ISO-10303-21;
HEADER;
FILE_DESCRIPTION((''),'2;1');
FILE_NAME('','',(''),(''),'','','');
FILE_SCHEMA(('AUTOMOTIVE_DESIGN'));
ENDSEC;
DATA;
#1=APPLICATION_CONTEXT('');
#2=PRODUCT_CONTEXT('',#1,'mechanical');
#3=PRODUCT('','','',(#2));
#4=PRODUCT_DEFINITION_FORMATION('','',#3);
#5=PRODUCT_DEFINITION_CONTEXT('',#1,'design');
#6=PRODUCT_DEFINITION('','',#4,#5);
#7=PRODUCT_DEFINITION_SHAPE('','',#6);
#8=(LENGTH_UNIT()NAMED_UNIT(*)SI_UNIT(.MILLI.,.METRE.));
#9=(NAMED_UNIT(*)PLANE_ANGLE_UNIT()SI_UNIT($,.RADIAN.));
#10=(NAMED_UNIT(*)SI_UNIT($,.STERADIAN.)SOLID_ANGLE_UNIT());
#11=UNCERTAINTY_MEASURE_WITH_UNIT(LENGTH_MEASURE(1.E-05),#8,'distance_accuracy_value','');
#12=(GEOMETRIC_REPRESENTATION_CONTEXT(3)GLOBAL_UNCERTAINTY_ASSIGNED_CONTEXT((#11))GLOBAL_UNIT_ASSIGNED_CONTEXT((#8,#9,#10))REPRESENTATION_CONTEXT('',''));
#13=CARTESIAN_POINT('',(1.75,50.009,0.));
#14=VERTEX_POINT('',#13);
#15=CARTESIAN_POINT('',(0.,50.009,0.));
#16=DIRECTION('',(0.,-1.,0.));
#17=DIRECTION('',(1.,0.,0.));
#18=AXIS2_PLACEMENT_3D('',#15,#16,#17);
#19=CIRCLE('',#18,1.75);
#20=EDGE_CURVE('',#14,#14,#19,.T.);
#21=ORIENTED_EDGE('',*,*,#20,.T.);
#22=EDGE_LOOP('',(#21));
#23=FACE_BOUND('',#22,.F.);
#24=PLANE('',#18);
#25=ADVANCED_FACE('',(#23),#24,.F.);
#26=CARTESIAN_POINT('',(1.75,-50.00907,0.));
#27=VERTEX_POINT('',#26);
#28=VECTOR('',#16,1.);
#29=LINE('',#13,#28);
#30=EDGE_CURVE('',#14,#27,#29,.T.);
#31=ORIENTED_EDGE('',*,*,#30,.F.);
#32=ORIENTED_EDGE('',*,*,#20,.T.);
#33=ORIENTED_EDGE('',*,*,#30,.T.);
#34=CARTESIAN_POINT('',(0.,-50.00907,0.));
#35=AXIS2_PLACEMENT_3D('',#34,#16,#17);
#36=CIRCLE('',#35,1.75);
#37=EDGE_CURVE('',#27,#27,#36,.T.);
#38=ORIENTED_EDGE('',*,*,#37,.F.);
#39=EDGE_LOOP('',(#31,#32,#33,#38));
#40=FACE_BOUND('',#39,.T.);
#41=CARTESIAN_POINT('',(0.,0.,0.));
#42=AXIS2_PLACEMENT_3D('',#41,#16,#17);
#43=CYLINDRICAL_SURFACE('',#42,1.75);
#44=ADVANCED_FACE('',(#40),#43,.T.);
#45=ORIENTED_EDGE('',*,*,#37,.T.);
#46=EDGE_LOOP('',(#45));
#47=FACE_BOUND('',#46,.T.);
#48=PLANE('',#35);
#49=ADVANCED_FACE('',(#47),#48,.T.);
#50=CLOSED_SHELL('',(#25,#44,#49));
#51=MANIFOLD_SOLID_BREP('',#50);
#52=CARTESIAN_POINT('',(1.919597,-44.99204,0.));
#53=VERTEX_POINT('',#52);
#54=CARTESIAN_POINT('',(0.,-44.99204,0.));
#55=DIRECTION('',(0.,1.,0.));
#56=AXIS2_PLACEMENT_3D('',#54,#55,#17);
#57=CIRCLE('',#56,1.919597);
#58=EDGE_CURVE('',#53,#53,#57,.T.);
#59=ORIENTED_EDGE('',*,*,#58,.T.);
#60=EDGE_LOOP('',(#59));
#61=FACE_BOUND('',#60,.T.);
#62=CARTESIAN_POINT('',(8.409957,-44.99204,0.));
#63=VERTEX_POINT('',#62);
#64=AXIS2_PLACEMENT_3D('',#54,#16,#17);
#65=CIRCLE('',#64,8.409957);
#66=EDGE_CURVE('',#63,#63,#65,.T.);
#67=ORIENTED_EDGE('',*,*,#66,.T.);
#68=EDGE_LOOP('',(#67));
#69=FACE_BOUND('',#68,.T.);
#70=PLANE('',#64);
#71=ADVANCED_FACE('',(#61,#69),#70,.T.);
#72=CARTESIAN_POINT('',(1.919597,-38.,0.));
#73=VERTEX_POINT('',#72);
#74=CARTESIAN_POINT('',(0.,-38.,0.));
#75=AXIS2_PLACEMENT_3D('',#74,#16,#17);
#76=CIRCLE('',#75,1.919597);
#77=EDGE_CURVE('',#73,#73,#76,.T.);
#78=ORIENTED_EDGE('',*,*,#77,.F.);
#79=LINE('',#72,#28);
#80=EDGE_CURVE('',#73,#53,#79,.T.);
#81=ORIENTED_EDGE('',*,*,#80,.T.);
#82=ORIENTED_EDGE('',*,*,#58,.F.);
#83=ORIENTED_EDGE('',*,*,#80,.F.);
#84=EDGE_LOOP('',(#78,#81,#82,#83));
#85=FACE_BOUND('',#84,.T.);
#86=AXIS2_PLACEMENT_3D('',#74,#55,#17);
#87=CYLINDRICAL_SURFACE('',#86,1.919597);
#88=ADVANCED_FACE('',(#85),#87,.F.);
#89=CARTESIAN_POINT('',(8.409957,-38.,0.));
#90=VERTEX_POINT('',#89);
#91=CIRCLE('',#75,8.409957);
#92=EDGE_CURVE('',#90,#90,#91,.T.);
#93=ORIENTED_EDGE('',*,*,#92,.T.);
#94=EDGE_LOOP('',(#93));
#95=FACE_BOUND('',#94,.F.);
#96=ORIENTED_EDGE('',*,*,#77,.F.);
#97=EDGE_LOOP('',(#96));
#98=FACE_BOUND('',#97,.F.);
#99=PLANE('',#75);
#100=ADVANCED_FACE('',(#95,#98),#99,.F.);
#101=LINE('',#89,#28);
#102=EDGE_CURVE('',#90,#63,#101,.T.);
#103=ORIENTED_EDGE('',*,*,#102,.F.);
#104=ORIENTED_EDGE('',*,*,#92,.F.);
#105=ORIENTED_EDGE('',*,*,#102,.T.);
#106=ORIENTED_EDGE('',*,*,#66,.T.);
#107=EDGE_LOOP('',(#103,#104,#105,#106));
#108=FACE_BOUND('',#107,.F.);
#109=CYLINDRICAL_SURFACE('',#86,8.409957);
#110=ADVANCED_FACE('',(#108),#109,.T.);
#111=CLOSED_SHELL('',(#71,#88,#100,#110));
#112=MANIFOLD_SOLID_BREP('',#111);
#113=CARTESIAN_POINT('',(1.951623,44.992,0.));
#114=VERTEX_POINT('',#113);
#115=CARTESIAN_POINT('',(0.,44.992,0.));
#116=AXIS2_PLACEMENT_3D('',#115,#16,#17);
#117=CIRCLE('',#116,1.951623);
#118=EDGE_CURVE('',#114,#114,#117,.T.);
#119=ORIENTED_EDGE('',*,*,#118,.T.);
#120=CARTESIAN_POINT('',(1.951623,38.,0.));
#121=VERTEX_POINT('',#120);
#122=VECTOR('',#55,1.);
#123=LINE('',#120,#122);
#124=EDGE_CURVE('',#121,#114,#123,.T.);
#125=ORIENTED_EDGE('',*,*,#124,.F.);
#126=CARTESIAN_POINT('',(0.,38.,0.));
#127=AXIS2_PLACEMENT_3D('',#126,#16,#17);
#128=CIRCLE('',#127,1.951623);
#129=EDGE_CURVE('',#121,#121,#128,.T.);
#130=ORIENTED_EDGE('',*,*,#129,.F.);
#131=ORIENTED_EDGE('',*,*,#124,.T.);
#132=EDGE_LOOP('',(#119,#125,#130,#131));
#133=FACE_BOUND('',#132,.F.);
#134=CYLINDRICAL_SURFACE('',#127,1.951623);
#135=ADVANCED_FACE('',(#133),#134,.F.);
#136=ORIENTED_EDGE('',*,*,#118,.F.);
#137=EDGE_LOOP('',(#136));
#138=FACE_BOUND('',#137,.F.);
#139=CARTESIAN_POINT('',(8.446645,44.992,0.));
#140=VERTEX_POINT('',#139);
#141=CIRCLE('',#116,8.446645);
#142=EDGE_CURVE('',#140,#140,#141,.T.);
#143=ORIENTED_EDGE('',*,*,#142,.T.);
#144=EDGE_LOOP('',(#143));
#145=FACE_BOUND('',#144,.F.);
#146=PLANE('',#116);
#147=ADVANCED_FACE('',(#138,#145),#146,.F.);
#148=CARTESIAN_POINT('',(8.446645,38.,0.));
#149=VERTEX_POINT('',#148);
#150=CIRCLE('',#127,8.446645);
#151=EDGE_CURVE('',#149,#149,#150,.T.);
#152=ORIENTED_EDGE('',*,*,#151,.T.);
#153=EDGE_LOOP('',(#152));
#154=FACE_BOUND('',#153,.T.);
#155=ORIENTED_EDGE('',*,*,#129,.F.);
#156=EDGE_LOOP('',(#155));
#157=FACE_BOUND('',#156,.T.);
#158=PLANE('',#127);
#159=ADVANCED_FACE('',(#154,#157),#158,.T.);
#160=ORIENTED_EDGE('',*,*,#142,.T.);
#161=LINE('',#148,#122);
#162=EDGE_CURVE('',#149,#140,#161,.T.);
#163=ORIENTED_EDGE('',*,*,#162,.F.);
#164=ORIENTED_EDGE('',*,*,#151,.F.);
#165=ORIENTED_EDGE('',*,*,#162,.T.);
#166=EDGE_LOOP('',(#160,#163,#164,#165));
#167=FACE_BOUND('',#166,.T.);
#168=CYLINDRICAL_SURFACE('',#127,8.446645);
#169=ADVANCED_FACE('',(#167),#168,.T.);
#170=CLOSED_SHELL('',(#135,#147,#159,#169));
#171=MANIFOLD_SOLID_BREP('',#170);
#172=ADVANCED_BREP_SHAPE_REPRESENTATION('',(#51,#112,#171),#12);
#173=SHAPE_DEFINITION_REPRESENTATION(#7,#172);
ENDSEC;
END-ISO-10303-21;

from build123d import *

# Parameters (mm, degrees)
F2_R      = 8.4099565343
F4_DEPTH  = 6.99204
F3_R      = 1.919597314
F5_DEPTH  = 7.58419
F6_R      = 1.75
F7_DEPTH  = 50.00907
F8_R      = 8.4466451415
F10_DEPTH = 6.992
F9_R      = 1.9516228475
F11_DEPTH = 10.0613
F12_DEPTH = 50.009


# Not quite as in the source:
# - a feature names something its author has since deleted; it is built from what else it names


with BuildPart() as f4:
    # F2 (on offset) → F4 (new body)
    with BuildSketch(Plane.XZ.offset(38)):
        Circle(F2_R)
    extrude(amount=F4_DEPTH)

    # F3 (on offset) → F5 (cut)
    with BuildSketch(Plane.XZ.offset(38)):
        Circle(F3_R)
    extrude(amount=F5_DEPTH, mode=Mode.SUBTRACT)


with BuildPart() as f7:
    # F6 (on Front) → F7 (new body)
    with BuildSketch(Plane.XZ):
        Circle(F6_R)
    extrude(amount=F7_DEPTH)

    # F6 (on Front) → F12 (join)
    with BuildSketch(Plane.XZ):
        Circle(F6_R)
    extrude(amount=-F12_DEPTH)


with BuildPart() as f10:
    # F8 (on offset) → F10 (new body)
    with BuildSketch(Plane.XZ.offset(-38)):
        Circle(F8_R)
    extrude(amount=-F10_DEPTH)

    # F9 (on offset) → F11 (cut)
    with BuildSketch(Plane.XZ.offset(-38)):
        Circle(F9_R)
    extrude(amount=-F11_DEPTH, mode=Mode.SUBTRACT)


solid = Compound([f4.part, f7.part, f10.part])
